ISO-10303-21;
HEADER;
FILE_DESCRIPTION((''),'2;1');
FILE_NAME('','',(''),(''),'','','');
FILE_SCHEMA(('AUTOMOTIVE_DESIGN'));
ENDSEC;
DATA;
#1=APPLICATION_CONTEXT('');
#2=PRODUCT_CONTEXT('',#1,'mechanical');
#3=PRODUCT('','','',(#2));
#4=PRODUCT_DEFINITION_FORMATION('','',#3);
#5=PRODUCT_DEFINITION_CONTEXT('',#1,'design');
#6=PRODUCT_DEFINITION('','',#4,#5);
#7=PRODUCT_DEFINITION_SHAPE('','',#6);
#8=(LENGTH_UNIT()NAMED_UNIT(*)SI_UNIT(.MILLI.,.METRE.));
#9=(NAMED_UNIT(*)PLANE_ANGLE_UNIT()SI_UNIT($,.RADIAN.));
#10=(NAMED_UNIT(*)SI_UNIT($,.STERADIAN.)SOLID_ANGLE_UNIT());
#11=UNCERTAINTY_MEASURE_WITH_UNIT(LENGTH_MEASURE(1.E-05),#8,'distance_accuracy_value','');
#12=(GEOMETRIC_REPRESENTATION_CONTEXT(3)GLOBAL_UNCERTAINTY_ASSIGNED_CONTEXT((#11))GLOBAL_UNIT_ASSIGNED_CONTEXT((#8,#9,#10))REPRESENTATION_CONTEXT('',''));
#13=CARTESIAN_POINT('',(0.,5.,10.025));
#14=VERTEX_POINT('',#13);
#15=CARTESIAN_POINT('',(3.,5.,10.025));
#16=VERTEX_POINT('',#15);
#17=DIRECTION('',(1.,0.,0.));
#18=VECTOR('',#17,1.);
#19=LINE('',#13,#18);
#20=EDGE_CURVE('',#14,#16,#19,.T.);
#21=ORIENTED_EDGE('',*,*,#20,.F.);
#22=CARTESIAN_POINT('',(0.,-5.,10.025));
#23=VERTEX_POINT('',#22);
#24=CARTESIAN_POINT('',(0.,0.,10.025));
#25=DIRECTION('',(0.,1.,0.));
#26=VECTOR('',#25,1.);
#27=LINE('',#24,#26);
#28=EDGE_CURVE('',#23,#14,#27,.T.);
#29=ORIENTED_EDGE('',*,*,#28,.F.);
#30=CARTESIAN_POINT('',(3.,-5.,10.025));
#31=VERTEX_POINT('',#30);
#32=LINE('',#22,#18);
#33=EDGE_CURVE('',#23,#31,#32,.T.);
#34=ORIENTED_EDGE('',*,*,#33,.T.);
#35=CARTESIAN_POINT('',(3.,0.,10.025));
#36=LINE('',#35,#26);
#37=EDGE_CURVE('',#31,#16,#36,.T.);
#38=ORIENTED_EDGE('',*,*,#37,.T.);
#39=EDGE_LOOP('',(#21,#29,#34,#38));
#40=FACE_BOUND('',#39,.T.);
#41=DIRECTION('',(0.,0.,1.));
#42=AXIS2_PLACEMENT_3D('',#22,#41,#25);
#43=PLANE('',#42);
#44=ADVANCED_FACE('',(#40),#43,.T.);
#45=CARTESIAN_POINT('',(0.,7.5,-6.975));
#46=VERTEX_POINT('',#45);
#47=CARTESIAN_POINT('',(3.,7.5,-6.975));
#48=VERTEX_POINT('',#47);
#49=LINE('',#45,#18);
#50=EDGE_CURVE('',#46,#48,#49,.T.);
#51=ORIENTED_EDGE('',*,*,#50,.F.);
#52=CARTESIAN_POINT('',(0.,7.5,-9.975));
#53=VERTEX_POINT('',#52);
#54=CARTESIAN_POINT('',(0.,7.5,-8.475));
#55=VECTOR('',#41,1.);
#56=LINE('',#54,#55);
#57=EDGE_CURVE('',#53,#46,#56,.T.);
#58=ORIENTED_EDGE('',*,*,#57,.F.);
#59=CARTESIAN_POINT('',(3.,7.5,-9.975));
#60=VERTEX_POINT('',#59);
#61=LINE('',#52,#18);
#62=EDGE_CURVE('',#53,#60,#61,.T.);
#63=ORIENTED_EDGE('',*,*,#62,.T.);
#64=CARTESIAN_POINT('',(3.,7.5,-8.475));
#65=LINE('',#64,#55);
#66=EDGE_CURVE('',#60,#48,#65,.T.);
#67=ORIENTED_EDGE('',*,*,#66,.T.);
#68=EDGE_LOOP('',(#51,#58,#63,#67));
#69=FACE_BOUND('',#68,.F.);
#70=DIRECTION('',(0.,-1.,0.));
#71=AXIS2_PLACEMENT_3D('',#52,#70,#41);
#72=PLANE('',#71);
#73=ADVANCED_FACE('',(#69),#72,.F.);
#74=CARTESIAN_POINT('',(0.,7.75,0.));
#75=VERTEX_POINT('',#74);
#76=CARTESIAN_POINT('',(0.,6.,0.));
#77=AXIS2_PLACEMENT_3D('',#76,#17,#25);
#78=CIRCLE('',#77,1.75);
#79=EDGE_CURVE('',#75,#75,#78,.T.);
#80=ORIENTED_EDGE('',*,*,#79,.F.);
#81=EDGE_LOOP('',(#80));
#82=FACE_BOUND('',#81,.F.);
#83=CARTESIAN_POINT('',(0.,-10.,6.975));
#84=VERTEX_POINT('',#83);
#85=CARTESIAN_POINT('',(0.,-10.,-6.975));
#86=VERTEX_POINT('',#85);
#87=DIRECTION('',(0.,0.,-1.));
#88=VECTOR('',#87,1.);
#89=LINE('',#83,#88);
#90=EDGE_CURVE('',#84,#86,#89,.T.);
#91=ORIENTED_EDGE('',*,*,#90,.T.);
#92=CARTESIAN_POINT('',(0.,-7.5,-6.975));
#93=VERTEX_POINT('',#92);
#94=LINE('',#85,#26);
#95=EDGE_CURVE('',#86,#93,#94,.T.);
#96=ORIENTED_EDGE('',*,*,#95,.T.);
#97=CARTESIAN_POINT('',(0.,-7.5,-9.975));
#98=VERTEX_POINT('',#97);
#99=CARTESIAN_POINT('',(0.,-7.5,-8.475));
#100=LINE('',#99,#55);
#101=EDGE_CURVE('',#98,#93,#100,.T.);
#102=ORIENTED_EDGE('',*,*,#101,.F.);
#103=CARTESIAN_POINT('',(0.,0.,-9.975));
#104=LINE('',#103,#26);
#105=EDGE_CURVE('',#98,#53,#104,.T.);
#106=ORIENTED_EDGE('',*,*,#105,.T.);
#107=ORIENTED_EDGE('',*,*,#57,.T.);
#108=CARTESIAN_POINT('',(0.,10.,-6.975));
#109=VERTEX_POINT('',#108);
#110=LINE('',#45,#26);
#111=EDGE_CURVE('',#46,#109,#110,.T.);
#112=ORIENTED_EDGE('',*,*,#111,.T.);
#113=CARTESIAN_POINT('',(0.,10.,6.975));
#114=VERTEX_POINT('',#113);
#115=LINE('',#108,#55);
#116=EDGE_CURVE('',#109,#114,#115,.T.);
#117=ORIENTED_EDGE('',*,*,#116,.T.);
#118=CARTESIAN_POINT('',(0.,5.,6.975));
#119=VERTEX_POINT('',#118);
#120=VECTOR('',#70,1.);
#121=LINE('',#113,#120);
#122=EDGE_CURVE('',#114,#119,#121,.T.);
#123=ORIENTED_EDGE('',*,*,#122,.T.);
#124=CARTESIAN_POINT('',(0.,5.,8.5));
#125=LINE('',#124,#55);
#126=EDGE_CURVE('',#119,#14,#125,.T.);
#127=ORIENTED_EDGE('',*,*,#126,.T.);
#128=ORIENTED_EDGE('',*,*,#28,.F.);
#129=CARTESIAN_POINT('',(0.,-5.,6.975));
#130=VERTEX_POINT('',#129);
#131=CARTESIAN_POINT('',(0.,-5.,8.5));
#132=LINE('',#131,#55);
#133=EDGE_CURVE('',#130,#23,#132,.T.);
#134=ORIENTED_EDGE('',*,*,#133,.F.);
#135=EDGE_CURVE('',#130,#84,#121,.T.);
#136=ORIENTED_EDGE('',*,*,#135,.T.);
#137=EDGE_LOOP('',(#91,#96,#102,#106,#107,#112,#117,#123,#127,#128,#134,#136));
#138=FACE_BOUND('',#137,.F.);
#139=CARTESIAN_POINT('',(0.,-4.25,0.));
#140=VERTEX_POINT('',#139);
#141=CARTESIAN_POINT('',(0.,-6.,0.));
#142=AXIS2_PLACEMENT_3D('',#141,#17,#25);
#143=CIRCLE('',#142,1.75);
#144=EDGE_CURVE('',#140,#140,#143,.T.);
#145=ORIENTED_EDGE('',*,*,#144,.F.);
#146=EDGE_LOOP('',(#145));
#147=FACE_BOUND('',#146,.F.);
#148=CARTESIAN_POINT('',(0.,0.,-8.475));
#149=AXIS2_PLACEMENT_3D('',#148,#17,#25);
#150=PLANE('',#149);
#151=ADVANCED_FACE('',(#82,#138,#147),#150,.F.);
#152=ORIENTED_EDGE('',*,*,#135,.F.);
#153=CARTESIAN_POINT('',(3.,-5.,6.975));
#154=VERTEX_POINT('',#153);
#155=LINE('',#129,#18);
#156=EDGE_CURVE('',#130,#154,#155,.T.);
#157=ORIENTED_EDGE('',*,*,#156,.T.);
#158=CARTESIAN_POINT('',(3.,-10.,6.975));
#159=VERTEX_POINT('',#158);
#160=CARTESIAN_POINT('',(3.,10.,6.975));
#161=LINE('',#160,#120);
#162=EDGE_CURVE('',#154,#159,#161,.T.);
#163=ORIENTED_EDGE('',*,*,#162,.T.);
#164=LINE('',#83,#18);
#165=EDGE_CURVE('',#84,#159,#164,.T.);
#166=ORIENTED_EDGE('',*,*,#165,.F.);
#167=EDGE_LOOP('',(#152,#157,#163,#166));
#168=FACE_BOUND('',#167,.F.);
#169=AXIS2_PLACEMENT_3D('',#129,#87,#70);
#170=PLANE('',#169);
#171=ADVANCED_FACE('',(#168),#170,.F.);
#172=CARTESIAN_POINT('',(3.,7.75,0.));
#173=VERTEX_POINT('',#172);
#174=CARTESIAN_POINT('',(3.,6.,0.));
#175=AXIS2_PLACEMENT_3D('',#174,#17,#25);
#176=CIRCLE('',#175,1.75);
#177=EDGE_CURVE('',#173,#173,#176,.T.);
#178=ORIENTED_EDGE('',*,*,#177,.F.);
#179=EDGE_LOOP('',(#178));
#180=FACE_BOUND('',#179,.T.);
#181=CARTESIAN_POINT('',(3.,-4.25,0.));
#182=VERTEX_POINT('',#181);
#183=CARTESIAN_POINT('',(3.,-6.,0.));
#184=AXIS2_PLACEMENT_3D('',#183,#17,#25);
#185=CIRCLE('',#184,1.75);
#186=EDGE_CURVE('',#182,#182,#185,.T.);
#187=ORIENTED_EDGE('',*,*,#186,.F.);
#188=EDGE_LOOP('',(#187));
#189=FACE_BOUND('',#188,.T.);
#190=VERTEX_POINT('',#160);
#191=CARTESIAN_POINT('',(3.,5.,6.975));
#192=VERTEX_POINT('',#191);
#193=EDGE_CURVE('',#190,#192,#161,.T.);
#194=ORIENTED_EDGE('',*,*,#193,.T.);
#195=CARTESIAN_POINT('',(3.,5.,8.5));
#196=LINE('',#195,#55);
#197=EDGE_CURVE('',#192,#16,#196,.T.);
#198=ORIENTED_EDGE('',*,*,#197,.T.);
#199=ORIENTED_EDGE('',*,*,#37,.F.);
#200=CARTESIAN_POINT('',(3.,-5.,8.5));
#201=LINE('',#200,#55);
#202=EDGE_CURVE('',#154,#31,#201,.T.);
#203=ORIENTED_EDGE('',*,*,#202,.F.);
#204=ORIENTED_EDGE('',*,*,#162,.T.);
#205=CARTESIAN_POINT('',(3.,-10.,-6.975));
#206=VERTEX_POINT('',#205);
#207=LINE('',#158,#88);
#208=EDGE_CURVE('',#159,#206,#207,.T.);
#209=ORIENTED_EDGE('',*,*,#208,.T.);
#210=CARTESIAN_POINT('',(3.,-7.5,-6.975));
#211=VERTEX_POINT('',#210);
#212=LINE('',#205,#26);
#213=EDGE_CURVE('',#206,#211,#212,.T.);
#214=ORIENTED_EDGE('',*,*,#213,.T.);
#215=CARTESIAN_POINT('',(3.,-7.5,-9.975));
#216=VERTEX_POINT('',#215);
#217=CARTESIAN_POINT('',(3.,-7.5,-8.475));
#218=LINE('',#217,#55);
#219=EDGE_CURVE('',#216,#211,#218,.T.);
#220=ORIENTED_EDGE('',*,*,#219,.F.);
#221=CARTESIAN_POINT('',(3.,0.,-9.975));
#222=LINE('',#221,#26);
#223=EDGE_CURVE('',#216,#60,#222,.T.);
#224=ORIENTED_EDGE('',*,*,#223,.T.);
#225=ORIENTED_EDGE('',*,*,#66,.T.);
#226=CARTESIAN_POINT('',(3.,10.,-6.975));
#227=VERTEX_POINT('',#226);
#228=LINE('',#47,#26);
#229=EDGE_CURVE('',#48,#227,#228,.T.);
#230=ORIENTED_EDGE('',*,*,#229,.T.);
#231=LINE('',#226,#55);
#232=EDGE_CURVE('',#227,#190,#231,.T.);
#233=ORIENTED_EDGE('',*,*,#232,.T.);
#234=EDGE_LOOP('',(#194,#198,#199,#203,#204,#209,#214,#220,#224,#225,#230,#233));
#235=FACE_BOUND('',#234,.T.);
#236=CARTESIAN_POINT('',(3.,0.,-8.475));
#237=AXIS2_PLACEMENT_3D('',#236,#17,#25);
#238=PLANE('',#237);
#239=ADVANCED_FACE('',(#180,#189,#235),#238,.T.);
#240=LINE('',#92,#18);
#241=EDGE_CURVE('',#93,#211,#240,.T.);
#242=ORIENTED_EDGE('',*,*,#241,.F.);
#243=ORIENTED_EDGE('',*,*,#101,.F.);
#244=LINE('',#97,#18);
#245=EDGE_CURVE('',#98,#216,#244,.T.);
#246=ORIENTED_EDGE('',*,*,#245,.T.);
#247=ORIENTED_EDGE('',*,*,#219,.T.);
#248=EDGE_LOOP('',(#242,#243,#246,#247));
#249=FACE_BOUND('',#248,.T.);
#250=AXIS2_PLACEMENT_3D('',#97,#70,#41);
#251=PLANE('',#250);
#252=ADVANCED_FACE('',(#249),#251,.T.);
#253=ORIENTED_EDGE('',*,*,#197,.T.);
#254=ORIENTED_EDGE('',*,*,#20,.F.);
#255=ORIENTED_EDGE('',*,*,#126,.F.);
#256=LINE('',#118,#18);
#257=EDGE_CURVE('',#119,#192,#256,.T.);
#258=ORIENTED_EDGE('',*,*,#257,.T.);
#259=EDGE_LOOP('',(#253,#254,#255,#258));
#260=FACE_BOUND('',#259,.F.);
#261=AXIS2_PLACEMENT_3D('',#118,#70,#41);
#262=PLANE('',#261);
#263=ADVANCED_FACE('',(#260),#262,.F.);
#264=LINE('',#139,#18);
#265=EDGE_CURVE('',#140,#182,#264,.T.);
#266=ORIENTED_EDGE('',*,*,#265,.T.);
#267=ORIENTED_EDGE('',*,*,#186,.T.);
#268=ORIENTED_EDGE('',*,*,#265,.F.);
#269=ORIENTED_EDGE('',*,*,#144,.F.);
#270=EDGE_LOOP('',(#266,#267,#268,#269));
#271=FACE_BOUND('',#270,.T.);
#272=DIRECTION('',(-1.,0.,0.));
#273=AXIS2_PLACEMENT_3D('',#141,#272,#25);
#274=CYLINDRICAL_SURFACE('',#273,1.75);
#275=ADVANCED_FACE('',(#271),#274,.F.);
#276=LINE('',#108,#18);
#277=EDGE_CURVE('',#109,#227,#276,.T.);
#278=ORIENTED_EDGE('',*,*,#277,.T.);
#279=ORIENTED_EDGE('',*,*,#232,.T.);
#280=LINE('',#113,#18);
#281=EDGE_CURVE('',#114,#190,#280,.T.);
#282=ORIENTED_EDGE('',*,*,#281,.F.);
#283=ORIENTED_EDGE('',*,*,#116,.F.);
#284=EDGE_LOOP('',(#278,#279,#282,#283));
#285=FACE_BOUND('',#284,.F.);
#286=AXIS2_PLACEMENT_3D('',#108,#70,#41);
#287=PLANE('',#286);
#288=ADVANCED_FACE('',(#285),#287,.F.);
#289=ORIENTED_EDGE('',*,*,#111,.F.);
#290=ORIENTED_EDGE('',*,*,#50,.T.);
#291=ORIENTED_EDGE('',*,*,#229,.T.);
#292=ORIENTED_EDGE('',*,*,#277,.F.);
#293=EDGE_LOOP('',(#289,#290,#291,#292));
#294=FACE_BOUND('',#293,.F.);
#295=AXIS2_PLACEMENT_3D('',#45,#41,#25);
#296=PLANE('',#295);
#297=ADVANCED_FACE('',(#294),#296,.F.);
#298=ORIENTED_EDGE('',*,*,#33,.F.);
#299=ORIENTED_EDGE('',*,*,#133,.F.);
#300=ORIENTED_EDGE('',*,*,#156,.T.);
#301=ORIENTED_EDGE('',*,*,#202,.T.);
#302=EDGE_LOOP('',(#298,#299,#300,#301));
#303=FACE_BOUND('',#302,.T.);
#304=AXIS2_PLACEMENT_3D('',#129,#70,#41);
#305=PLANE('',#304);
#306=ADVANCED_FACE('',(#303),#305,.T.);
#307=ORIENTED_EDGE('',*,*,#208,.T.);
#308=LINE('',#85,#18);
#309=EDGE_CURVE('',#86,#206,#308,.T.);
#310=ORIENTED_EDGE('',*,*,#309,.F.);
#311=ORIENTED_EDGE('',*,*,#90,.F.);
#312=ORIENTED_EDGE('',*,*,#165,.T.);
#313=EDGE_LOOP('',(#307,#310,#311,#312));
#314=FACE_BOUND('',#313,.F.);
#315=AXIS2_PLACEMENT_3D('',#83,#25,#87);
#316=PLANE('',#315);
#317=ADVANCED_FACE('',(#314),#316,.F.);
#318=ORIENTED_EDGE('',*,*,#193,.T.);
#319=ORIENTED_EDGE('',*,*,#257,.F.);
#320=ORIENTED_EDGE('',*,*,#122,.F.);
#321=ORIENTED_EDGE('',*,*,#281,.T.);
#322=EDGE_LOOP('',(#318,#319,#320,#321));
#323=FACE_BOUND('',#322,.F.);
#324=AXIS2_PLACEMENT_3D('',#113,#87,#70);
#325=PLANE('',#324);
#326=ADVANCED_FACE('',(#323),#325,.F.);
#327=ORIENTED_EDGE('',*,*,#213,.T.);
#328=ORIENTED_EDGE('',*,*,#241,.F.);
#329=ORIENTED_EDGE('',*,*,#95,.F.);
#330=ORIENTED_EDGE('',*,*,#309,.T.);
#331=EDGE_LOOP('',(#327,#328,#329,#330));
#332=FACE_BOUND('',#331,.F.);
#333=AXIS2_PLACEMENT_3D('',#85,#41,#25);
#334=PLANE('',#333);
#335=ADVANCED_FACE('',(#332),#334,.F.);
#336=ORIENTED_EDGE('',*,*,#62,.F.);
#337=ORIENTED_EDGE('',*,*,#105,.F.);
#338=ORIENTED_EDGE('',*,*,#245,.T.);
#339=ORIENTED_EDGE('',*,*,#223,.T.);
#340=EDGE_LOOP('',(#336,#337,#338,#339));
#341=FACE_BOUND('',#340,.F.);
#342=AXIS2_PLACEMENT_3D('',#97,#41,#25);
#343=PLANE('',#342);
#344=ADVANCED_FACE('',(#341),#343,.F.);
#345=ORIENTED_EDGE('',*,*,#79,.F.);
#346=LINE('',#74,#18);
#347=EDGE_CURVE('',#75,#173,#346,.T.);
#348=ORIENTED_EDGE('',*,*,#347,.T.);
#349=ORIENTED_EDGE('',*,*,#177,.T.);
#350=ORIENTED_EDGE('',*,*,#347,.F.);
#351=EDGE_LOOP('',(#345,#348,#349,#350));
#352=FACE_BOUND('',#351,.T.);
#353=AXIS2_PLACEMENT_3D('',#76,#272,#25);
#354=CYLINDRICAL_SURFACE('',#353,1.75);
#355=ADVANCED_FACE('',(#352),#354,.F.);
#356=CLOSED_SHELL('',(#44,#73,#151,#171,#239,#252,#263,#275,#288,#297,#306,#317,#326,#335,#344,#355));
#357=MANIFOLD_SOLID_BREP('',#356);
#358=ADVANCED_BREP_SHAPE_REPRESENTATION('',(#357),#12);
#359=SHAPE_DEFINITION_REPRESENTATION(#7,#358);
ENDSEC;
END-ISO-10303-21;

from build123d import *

# Parameters (mm, degrees)
F0_W     = 15
F0_H     = 3
F0_R     = 1.75
F0_W_2   = 10
F0_H_2   = 3.05
F1_DEPTH = 3


# Not quite as in the source:
# - a feature names something its author has since deleted; it is built from what else it names


with BuildPart() as f1:
    # F0 (on Right) → F1 (new body)
    with BuildSketch(Plane.YZ):
        with Locations((0, -8.475)):
            Rectangle(F0_W, F0_H)
        Polygon((7.5, -6.975), (10, -6.975), (10, 6.975), (5, 6.975), (-5, 6.975), (-10, 6.975), (-10, -6.975), (-7.5, -6.975), align=None)
        with Locations((-6, 0)):
            Circle(F0_R, mode=Mode.SUBTRACT)
        with Locations((6, 0)):
            Circle(F0_R, mode=Mode.SUBTRACT)
        with Locations((0, 8.5)):
            Rectangle(F0_W_2, F0_H_2)
    extrude(amount=F1_DEPTH)


solid = f1.part
